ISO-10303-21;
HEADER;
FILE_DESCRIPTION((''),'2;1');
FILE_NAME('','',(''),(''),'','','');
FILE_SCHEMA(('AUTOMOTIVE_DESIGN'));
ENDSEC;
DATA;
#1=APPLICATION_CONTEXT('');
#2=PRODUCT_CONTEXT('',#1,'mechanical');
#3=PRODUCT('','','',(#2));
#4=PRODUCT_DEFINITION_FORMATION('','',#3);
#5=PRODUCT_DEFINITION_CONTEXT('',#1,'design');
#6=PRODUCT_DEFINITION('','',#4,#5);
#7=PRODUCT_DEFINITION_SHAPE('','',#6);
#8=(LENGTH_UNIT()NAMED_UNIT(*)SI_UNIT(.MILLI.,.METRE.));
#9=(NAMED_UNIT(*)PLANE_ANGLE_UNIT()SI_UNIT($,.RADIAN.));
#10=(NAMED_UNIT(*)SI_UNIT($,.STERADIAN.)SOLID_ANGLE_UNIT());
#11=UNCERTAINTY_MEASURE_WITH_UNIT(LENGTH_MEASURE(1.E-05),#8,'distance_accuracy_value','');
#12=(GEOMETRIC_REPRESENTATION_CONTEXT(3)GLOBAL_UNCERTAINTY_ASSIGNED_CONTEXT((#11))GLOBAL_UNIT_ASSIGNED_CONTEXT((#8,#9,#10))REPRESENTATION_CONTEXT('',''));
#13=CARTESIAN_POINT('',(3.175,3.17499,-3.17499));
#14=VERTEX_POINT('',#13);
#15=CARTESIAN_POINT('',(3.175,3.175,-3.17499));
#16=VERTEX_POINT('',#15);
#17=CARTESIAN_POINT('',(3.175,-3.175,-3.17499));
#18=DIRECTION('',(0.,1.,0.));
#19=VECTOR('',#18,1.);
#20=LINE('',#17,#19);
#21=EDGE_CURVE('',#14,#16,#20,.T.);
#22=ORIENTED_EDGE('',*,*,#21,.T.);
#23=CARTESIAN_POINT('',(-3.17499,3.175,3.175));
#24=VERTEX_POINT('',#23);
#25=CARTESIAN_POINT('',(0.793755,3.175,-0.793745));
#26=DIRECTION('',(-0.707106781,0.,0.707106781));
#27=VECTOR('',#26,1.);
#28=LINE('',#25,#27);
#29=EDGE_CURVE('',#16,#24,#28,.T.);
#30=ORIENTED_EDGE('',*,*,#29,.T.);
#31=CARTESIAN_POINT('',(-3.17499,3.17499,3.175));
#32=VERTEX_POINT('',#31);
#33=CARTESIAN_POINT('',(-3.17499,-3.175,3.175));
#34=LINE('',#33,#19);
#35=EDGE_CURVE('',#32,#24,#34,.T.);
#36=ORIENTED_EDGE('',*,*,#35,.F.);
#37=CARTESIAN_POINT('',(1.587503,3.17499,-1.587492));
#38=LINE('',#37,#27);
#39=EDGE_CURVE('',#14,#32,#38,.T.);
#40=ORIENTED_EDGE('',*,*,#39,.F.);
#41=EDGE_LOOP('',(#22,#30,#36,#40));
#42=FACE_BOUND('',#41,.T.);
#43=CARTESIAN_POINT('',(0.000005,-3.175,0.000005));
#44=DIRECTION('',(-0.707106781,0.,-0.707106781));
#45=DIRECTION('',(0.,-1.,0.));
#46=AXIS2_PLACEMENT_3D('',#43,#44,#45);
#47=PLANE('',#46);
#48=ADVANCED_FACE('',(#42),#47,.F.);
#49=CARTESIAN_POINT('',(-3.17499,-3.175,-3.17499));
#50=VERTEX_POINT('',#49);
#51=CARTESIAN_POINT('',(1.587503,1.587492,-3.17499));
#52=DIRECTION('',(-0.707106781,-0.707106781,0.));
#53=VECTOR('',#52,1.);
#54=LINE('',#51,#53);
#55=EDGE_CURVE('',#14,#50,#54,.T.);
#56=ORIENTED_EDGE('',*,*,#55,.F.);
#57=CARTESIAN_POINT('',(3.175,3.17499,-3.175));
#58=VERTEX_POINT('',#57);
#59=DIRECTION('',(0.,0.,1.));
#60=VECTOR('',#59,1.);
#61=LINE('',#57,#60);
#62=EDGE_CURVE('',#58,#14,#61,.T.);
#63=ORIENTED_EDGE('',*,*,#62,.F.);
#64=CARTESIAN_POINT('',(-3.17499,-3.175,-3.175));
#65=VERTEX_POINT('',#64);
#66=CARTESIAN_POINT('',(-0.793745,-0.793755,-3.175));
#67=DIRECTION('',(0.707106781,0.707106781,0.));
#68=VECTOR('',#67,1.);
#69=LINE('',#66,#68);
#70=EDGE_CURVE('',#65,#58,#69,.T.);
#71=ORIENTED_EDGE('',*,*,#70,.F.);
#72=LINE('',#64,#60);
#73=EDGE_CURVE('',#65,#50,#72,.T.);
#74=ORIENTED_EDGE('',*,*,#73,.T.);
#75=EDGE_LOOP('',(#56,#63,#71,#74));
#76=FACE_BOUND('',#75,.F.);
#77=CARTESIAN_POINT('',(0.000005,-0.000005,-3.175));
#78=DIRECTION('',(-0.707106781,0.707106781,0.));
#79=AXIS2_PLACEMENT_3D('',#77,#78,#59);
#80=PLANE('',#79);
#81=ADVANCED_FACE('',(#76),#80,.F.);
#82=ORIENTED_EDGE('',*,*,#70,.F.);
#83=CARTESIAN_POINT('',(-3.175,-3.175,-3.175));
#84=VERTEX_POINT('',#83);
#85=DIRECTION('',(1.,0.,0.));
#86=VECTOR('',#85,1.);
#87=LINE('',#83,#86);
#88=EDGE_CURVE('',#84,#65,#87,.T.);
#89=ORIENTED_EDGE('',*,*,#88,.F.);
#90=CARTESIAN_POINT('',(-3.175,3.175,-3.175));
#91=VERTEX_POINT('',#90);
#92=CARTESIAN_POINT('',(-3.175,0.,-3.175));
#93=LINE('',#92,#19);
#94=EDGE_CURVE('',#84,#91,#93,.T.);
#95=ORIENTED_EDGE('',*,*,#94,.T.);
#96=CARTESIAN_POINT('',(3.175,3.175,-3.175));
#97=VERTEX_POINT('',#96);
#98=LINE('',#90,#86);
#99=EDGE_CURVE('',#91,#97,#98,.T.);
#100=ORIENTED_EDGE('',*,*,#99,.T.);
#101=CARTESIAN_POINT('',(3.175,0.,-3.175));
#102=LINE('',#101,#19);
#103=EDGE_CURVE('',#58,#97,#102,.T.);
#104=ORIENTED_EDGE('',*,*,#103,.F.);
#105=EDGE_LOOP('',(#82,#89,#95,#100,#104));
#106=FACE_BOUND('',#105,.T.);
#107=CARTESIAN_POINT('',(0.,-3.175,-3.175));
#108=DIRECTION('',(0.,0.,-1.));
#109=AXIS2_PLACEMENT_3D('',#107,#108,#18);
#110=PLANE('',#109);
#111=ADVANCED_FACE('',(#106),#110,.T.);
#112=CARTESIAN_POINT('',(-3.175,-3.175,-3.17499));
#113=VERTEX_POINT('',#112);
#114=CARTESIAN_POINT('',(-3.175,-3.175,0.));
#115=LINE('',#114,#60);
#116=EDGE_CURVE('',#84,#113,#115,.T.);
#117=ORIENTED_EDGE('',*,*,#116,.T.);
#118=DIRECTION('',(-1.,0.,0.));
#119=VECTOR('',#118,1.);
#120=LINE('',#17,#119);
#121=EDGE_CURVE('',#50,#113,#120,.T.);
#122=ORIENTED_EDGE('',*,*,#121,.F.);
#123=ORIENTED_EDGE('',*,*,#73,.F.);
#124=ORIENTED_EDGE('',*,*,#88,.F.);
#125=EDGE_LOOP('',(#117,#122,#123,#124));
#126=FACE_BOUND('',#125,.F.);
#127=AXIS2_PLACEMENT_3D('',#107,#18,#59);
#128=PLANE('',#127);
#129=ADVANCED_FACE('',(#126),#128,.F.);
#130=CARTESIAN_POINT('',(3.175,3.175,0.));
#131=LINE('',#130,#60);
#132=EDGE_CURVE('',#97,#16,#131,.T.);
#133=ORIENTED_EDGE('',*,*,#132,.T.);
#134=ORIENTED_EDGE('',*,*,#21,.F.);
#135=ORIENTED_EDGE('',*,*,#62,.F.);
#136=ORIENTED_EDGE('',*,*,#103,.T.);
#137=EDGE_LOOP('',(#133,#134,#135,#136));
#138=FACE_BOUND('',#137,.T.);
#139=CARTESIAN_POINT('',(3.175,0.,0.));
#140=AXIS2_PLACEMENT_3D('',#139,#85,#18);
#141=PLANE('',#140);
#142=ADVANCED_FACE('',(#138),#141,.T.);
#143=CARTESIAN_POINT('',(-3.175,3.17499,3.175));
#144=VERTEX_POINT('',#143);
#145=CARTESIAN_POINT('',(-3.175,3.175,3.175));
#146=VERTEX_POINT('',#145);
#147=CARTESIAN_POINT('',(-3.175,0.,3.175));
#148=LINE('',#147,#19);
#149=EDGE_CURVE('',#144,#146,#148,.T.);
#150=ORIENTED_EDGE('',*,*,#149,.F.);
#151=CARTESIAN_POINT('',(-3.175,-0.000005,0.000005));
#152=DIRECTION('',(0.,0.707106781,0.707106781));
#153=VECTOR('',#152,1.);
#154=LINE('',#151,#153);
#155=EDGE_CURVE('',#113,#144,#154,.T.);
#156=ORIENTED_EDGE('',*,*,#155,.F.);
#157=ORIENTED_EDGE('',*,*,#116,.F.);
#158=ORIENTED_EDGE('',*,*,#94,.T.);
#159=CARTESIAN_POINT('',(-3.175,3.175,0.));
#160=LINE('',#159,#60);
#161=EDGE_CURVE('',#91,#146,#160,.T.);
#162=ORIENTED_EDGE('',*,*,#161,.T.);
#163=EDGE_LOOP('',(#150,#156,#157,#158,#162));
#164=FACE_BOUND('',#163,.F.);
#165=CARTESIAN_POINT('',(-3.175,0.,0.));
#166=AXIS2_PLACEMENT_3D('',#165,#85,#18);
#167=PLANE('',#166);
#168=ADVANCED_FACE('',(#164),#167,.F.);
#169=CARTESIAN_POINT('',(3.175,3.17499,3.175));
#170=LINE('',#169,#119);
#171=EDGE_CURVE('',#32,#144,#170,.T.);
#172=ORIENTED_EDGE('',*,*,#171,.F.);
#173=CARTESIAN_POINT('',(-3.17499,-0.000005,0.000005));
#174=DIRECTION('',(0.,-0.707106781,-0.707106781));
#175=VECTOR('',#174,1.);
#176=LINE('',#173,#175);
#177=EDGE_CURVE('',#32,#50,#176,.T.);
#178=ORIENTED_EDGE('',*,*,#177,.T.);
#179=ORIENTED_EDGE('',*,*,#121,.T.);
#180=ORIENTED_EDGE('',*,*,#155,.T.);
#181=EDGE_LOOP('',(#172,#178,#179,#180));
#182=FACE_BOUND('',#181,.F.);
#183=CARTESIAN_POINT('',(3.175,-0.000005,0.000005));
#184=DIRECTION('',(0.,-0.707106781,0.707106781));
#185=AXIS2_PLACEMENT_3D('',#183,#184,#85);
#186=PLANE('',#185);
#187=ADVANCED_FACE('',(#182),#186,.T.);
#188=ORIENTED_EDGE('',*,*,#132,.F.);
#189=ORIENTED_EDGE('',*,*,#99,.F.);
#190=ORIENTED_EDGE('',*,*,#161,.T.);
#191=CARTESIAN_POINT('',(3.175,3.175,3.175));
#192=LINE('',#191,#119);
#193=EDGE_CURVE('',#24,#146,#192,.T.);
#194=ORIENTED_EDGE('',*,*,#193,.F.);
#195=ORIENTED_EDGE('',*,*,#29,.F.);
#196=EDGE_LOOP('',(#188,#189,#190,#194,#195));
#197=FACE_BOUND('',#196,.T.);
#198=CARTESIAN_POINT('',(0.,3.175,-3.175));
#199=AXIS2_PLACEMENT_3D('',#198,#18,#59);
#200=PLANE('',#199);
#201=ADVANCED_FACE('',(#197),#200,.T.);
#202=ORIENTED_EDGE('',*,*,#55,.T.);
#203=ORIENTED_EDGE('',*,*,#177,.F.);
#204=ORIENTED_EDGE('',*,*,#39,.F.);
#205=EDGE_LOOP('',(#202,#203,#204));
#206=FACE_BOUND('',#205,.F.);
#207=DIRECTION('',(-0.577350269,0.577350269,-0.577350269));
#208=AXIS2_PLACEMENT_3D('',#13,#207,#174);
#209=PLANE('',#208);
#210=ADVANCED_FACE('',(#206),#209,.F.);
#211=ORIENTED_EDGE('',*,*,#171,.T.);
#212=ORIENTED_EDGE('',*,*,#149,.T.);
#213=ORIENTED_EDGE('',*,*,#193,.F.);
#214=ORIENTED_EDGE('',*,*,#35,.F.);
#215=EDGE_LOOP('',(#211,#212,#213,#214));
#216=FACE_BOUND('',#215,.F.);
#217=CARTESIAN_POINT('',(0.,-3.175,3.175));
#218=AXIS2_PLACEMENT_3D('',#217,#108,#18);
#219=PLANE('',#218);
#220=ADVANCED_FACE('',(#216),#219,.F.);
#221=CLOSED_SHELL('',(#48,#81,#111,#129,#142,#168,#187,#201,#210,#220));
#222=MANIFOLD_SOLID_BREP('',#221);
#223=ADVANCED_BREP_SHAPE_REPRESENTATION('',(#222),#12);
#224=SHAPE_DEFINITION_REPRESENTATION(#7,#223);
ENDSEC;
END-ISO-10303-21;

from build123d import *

# Parameters (mm, degrees)
F0_W     = 6.35
F0_H     = 6.35
F1_DEPTH = 3.175
F2_SIZE  = 6.34999


# Not quite as in the source:
# - a fillet or chamfer is up to 0.001 mm smaller than in the source, because OpenCascade refuses the exact size


with BuildPart() as f1:
    # F0 (on Right) → F1 (new body, symmetric)
    with BuildSketch(Plane.YZ):
        Rectangle(F0_W, F0_H)
    extrude(amount=F1_DEPTH, both=True)

    # F2 (size 6.35 in the source; OpenCascade refuses exactly that, so slightly less here)
    f2_edges = [f1.edges().sort_by_distance(p)[0] for p in [
        (0, -3.175, 3.175),
        (3.175, 0, 3.175),
        (3.175, -3.175, 0),
    ]]
    chamfer(f2_edges, length=F2_SIZE)


solid = f1.part
